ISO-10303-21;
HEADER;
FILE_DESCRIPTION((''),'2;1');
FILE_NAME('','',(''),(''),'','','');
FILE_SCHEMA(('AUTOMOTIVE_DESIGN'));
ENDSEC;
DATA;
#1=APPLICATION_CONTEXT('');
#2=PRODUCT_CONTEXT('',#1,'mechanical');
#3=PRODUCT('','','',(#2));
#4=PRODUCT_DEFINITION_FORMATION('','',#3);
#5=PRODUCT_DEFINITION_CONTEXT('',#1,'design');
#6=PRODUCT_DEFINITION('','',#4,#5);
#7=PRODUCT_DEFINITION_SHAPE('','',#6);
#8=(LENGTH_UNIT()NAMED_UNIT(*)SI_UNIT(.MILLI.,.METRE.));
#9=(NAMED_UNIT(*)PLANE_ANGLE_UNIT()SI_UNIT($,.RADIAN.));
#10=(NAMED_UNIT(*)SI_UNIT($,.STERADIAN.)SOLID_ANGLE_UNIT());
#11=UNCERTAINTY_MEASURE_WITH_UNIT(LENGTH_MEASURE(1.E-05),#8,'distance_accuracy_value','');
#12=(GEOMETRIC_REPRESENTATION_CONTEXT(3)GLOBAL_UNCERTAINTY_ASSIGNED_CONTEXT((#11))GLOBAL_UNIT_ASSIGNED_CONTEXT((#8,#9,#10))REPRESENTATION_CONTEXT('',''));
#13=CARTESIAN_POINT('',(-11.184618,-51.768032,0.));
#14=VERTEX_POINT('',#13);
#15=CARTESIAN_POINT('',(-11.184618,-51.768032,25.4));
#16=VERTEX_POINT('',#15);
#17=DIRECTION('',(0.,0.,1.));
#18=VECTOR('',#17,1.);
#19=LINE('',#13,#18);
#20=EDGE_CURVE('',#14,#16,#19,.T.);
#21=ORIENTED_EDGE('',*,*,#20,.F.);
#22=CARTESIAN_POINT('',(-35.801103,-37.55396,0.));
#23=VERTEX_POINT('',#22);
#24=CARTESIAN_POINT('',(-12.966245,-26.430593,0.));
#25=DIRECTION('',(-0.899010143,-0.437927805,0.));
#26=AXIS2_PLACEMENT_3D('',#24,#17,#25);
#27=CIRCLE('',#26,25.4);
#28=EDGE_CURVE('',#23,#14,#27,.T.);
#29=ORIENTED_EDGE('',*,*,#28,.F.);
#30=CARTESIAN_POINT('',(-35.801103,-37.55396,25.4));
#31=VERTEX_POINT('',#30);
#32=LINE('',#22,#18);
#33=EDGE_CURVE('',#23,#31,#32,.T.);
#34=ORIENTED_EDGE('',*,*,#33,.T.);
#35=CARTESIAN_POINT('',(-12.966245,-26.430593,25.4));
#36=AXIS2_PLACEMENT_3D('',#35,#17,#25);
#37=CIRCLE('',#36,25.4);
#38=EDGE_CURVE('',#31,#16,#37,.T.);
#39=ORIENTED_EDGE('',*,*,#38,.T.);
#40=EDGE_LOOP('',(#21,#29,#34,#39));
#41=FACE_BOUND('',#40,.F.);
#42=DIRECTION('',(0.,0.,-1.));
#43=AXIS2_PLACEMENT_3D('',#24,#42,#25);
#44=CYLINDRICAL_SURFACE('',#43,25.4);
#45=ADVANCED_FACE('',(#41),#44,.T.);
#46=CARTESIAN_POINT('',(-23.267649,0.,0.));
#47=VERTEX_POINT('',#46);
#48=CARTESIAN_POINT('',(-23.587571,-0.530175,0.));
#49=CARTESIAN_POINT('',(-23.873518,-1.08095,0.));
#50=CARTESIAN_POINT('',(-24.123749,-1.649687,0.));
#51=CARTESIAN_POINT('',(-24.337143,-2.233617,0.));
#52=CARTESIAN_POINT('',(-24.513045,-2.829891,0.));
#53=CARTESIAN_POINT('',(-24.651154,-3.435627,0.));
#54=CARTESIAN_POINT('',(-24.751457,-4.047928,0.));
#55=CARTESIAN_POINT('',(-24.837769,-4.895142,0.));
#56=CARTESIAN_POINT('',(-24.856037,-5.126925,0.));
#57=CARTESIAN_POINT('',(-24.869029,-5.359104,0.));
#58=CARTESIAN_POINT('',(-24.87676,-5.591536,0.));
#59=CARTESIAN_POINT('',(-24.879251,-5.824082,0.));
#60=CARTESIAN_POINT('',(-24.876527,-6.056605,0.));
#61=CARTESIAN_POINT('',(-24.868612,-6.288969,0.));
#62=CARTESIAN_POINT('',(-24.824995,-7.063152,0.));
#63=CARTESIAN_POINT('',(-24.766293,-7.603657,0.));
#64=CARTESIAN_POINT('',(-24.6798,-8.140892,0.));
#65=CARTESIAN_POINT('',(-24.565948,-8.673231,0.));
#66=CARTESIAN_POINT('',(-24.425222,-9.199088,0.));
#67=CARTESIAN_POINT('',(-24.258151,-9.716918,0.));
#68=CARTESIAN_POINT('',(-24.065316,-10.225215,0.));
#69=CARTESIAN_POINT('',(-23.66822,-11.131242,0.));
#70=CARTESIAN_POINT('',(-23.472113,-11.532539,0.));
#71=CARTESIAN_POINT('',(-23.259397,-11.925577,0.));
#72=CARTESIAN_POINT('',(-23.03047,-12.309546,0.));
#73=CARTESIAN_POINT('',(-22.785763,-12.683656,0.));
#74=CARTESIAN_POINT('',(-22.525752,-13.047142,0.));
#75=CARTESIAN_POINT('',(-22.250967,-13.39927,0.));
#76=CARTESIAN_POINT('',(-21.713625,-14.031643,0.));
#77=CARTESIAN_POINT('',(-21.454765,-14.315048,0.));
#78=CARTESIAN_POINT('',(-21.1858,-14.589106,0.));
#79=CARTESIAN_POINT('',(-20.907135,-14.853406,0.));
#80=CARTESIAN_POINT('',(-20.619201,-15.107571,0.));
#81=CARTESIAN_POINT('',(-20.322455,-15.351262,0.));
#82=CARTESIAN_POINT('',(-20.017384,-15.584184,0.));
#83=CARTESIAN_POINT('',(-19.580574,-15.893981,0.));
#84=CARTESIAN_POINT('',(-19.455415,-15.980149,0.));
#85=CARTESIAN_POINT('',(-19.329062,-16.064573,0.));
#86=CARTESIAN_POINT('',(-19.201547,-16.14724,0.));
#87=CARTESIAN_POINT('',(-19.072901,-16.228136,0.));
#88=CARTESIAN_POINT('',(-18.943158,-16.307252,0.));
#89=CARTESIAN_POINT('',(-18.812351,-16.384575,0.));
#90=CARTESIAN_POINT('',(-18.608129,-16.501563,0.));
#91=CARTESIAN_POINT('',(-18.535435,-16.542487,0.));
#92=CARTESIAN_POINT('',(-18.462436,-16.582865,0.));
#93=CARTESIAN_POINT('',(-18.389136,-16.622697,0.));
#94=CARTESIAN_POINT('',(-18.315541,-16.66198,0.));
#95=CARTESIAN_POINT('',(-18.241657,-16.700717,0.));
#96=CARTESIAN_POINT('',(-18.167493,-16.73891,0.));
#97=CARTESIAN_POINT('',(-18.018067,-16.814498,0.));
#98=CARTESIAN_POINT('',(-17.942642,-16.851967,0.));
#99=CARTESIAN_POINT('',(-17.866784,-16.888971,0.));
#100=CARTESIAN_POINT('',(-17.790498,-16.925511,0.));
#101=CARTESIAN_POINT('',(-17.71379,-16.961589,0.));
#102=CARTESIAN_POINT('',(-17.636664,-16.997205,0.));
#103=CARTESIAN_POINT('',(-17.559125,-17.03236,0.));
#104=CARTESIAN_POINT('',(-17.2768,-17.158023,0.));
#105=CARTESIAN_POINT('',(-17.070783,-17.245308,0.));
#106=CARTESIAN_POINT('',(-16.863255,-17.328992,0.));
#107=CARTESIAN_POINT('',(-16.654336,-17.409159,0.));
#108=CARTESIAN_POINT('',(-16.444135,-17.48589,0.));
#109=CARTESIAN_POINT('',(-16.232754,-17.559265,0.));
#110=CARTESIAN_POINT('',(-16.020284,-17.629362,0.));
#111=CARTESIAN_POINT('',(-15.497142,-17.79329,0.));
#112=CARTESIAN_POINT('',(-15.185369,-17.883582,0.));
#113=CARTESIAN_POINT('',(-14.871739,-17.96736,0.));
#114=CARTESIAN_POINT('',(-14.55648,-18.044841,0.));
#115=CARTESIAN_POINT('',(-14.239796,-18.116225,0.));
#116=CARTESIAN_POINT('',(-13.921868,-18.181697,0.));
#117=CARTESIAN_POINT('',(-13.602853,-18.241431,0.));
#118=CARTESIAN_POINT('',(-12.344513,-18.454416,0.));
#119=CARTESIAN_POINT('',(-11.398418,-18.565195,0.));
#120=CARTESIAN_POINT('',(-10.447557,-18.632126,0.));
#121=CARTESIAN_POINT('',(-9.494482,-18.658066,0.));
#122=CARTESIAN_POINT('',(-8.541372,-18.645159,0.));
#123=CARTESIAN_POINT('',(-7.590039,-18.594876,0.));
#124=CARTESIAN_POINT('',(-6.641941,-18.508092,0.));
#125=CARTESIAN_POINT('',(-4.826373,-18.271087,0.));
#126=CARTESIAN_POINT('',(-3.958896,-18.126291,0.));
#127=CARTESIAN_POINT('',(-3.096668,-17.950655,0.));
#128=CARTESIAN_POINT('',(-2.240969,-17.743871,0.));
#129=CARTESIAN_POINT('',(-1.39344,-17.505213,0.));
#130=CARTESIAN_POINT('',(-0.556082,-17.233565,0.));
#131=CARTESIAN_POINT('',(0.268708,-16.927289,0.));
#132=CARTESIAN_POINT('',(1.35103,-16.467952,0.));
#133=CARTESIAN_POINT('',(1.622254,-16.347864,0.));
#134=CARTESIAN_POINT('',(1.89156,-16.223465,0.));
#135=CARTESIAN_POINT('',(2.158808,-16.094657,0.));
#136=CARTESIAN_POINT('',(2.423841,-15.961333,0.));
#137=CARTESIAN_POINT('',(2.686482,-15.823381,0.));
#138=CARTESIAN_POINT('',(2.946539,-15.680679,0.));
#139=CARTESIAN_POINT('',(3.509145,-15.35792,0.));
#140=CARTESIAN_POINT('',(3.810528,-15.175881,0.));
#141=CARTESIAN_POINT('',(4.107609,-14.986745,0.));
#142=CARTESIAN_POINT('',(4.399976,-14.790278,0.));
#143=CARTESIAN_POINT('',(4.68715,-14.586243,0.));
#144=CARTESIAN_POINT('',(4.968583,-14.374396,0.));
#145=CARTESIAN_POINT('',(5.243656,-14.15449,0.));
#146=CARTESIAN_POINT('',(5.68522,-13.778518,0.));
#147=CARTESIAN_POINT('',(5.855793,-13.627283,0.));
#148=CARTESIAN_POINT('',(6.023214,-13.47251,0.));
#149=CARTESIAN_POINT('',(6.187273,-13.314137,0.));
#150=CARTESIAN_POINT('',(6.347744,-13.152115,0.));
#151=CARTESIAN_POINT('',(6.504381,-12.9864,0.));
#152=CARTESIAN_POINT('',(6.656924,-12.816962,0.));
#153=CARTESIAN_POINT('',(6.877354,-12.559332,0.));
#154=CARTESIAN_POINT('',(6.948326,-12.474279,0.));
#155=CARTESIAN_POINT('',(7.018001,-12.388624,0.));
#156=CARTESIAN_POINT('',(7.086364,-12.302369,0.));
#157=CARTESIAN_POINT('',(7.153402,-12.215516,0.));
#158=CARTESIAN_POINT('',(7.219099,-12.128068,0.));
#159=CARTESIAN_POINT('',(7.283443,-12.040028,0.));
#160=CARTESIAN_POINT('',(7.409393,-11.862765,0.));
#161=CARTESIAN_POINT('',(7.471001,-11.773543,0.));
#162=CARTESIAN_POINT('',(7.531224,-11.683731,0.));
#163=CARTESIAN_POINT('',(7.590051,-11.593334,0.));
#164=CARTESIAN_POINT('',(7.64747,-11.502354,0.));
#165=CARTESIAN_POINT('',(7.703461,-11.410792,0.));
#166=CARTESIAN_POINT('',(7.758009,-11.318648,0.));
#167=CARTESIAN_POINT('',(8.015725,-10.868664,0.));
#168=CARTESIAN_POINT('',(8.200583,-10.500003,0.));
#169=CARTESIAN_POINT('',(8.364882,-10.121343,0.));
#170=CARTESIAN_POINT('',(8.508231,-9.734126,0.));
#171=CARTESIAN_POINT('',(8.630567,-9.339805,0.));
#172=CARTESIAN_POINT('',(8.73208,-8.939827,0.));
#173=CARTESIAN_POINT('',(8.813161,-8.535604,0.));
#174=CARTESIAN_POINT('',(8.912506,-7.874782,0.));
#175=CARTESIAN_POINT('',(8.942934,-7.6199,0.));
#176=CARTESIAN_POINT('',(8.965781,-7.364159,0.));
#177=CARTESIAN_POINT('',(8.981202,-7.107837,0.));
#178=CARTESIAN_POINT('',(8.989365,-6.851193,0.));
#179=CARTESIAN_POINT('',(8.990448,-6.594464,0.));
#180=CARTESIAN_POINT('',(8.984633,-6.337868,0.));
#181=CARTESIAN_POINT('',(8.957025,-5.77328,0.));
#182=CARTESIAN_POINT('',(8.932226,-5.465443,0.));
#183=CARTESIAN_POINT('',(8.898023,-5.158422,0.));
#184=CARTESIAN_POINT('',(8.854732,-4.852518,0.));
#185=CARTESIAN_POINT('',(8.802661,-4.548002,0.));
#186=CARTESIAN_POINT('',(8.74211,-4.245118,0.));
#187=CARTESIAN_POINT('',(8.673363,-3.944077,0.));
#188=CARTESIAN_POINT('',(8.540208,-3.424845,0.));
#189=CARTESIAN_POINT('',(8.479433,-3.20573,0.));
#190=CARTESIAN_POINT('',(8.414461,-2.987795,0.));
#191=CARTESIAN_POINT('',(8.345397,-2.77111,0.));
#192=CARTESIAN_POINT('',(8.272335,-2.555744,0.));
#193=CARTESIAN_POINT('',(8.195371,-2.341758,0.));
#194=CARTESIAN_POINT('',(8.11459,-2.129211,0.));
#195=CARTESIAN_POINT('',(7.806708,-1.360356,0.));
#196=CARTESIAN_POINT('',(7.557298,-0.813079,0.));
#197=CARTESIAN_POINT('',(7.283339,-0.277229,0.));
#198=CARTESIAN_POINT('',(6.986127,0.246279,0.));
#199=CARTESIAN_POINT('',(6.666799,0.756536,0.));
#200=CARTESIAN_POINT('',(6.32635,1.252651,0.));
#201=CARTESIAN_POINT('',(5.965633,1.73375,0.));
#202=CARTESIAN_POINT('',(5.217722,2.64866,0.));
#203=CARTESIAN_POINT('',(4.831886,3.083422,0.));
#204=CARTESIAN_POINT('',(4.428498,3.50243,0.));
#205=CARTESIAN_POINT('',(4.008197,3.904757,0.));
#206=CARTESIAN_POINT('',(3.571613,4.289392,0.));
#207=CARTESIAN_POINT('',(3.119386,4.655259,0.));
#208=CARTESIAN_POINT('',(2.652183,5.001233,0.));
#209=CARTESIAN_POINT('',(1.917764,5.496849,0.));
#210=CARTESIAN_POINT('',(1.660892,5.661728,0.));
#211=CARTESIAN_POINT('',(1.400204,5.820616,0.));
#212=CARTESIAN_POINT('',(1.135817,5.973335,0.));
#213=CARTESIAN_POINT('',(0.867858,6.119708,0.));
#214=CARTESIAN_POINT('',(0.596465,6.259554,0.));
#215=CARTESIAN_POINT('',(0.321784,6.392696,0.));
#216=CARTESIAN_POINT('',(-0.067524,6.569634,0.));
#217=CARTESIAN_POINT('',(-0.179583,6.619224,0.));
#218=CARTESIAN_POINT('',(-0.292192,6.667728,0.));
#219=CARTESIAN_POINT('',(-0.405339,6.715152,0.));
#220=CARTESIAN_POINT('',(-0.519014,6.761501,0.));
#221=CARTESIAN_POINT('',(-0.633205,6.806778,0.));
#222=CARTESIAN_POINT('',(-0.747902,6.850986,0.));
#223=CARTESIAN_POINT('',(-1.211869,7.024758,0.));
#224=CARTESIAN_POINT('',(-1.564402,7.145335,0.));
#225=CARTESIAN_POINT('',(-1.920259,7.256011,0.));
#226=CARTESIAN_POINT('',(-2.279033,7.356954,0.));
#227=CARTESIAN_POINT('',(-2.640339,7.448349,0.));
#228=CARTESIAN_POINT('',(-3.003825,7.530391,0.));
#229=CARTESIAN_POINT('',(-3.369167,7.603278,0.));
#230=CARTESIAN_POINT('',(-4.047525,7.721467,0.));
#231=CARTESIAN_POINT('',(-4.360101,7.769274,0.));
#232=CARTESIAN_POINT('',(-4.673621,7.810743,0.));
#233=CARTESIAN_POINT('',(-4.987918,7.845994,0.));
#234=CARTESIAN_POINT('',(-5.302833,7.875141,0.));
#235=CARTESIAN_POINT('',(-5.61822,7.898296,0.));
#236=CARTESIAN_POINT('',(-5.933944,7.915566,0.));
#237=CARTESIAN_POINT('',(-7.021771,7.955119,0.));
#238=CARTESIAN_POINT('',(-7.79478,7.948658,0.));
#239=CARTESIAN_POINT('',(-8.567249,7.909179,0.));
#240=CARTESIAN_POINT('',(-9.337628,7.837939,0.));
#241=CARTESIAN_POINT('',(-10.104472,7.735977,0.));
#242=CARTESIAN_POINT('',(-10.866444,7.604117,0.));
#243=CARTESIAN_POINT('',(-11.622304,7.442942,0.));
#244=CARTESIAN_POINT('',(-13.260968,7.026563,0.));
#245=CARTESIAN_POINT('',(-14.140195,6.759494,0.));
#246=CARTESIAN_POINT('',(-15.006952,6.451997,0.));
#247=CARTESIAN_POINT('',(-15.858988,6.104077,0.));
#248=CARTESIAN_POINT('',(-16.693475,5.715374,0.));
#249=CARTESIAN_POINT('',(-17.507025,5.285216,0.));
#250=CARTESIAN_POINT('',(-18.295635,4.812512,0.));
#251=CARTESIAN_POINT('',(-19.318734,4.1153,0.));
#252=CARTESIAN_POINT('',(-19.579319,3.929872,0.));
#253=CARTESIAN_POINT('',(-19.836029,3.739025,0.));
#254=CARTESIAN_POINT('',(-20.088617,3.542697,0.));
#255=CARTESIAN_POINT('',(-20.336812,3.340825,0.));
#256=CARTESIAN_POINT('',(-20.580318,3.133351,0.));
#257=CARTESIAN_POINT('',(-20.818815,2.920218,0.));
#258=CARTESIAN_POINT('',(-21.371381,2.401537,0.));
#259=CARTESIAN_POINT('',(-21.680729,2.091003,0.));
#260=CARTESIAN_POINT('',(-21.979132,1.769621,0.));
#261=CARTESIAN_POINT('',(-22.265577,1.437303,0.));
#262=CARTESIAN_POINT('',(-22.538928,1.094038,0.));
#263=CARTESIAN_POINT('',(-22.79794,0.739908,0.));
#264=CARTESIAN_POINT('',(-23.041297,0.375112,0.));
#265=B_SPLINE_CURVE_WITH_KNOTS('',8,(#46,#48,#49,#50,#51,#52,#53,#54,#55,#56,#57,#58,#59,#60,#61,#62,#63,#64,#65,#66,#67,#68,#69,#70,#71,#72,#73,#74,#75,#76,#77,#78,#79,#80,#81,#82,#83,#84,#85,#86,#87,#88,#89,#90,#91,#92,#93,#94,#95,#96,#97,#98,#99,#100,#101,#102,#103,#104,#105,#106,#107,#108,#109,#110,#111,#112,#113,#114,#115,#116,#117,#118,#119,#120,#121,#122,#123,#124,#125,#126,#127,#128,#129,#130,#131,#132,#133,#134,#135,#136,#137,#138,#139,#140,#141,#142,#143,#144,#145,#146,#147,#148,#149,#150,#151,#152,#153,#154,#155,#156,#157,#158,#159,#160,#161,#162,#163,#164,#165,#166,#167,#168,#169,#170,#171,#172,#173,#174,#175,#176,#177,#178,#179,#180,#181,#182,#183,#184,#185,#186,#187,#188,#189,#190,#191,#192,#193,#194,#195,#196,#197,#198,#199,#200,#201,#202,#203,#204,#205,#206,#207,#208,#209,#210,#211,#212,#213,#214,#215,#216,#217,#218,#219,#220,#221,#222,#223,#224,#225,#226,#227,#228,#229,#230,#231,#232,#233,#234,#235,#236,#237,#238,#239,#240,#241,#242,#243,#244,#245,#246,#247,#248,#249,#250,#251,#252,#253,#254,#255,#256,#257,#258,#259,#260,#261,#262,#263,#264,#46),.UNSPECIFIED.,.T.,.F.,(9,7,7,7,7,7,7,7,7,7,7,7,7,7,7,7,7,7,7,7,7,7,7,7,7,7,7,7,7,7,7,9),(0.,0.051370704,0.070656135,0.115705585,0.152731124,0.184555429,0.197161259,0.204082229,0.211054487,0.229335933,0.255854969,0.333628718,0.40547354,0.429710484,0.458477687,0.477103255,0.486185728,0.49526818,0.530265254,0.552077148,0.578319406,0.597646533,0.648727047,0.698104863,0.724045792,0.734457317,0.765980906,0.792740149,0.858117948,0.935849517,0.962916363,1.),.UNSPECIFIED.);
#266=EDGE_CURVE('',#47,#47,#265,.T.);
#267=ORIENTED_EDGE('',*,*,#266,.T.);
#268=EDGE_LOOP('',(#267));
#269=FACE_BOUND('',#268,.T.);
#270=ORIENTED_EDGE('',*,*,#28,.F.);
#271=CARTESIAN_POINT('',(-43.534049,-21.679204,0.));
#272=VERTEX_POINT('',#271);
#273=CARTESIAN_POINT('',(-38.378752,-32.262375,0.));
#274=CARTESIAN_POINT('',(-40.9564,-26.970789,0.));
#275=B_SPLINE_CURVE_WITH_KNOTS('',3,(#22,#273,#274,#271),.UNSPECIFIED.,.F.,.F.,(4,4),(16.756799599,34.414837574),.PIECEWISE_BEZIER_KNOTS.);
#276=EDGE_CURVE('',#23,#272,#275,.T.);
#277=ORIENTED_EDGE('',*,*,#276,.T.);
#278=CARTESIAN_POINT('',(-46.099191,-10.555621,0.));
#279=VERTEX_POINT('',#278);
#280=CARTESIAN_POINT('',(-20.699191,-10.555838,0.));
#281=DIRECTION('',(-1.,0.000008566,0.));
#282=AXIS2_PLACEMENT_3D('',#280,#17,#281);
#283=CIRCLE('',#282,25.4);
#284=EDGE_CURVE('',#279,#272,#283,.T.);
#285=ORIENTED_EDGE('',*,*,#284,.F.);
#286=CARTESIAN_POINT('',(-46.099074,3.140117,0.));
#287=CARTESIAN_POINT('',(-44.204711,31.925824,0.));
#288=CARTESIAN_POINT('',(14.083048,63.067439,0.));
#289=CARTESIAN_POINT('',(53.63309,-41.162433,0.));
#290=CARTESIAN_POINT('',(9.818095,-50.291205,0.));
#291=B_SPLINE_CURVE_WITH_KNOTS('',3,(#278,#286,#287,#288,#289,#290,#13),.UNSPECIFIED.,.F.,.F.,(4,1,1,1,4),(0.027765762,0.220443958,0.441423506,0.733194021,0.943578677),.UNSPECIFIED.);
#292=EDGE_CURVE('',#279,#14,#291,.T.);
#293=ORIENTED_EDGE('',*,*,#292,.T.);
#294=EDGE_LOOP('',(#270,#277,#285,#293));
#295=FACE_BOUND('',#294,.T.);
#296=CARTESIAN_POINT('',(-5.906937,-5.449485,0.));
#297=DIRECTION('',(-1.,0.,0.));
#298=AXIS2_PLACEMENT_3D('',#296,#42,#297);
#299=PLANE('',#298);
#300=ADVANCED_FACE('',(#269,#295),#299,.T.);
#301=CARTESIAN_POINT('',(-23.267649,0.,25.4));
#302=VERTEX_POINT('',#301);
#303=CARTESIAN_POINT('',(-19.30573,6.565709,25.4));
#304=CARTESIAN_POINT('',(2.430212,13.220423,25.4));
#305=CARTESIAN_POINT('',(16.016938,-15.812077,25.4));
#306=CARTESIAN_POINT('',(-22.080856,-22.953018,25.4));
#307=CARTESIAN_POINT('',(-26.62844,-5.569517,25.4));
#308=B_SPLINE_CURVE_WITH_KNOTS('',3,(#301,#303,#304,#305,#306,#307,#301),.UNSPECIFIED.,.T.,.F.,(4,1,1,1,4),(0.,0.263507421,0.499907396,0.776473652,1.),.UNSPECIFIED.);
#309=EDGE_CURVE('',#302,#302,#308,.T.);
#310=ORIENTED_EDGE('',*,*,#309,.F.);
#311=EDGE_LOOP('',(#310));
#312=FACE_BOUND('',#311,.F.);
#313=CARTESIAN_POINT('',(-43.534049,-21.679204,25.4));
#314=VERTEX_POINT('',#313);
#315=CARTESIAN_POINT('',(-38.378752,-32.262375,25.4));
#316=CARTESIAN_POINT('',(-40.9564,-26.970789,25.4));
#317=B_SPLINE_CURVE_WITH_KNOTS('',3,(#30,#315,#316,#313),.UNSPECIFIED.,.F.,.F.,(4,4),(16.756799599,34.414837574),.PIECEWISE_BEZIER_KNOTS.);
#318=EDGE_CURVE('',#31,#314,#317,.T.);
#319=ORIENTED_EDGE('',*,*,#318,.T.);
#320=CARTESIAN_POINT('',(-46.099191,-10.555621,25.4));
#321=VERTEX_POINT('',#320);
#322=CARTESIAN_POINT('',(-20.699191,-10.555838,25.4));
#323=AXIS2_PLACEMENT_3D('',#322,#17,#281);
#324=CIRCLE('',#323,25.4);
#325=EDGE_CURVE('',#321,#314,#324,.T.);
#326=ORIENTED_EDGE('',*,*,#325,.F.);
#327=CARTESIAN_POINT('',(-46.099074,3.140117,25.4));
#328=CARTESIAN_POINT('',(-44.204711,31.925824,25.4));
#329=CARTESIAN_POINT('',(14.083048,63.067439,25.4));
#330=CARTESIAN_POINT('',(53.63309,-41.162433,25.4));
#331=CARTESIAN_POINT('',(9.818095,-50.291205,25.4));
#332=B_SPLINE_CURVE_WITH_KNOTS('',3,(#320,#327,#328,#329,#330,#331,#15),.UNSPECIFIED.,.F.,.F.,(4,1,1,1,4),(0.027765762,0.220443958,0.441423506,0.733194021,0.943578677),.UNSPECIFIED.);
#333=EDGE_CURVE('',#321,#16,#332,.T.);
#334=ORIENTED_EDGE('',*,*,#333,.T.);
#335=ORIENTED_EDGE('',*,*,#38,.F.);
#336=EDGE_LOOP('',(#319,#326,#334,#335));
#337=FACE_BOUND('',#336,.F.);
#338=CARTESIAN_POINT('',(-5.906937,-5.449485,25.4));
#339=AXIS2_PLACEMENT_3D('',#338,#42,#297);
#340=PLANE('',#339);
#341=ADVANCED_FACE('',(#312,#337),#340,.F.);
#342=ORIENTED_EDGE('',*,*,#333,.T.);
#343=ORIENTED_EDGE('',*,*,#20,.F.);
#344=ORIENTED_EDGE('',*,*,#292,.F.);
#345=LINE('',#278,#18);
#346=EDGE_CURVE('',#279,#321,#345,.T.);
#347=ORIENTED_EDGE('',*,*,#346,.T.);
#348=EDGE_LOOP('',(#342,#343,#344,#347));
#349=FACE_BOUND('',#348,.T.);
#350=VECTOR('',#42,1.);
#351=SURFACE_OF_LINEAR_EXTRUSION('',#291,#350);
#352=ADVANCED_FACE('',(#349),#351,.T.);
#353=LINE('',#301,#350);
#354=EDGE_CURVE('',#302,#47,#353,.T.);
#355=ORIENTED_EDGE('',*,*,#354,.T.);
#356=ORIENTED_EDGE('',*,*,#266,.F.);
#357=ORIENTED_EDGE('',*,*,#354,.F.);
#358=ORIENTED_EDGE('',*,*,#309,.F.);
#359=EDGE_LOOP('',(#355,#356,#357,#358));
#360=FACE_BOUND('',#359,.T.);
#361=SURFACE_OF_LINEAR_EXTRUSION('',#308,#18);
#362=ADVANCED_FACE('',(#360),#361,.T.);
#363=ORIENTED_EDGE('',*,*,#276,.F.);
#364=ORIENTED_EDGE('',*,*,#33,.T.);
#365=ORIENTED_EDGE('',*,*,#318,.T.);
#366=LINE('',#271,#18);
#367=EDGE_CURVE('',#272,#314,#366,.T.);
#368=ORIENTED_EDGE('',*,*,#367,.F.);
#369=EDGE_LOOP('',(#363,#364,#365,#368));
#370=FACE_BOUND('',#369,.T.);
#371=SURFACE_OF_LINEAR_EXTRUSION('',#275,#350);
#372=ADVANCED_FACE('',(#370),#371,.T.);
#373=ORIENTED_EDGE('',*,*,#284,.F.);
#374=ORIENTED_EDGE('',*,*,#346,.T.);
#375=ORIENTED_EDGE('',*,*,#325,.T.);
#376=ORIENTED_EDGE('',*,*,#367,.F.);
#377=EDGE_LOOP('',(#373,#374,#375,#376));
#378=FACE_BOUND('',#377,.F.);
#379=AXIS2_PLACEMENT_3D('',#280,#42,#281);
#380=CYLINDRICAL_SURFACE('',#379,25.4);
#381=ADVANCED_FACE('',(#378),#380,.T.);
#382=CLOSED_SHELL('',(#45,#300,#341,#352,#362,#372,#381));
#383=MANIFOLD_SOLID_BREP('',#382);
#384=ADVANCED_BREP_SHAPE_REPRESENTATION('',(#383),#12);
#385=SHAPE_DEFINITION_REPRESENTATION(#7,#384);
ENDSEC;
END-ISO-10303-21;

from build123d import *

# Parameters (mm, degrees)
F1_DEPTH = 25.4
F3_DEPTH = 104.902


with BuildPart() as f1:
    # F0 (on Top) → F1 (new body)
    with BuildSketch(Plane.XY):
        with BuildLine():
            add(Edge.make_bspline(
                [(-46.0991912945, -10.5556205251), (-46.0990739821, 3.1401170204), (-44.2047112287, 31.9258238437), (14.0830478954, 63.0674394607), (53.6330898009, -41.1624333533), (9.8180946284, -50.2912053998), (-11.1846181743, -51.7680321244)],
                knots=[0.027765762, 0.027765762, 0.027765762, 0.027765762, 0.2204439576, 0.441423506, 0.7331940213, 0.9435786765, 0.9435786765, 0.9435786765, 0.9435786765], degree=3))
            ThreePointArc((-46.0991912945, -10.5556205251), (-45.4496236559, -16.2633855485), (-43.5340489335, -21.6792043382))
            add(Edge.make_bspline(
                [(-35.8011031231, -37.5539595869), (-38.3787517266, -32.262374504), (-40.95640033, -26.9707894211), (-43.5340489335, -21.6792043382)],
                knots=[16.7567995992, 16.7567995992, 16.7567995992, 16.7567995992, 34.4148375738, 34.4148375738, 34.4148375738, 34.4148375738], degree=3))
            ThreePointArc((-35.8011031231, -37.5539595869), (-25.6674104446, -48.4269659659), (-11.1846181743, -51.7680321244))
        make_face()
    extrude(amount=F1_DEPTH)

    # F2 (on face) → F3 (cut)
    with BuildSketch(Plane.XY.offset(25.4)):
        with BuildLine():
            add(Edge.make_bspline(
                [(-23.2676491141, 0), (-19.3057295103, 6.5657089804), (2.4302119089, 13.2204227766), (16.0169378818, -15.8120767234), (-22.0808563681, -22.9530178694), (-26.6284403137, -5.5695165896), (-23.2676491141, 0)],
                knots=[0, 0, 0, 0, 0.2635074208, 0.4999073959, 0.7764736519, 1, 1, 1, 1], degree=3))
        make_face()
    extrude(amount=-F3_DEPTH, mode=Mode.SUBTRACT)


solid = f1.part
